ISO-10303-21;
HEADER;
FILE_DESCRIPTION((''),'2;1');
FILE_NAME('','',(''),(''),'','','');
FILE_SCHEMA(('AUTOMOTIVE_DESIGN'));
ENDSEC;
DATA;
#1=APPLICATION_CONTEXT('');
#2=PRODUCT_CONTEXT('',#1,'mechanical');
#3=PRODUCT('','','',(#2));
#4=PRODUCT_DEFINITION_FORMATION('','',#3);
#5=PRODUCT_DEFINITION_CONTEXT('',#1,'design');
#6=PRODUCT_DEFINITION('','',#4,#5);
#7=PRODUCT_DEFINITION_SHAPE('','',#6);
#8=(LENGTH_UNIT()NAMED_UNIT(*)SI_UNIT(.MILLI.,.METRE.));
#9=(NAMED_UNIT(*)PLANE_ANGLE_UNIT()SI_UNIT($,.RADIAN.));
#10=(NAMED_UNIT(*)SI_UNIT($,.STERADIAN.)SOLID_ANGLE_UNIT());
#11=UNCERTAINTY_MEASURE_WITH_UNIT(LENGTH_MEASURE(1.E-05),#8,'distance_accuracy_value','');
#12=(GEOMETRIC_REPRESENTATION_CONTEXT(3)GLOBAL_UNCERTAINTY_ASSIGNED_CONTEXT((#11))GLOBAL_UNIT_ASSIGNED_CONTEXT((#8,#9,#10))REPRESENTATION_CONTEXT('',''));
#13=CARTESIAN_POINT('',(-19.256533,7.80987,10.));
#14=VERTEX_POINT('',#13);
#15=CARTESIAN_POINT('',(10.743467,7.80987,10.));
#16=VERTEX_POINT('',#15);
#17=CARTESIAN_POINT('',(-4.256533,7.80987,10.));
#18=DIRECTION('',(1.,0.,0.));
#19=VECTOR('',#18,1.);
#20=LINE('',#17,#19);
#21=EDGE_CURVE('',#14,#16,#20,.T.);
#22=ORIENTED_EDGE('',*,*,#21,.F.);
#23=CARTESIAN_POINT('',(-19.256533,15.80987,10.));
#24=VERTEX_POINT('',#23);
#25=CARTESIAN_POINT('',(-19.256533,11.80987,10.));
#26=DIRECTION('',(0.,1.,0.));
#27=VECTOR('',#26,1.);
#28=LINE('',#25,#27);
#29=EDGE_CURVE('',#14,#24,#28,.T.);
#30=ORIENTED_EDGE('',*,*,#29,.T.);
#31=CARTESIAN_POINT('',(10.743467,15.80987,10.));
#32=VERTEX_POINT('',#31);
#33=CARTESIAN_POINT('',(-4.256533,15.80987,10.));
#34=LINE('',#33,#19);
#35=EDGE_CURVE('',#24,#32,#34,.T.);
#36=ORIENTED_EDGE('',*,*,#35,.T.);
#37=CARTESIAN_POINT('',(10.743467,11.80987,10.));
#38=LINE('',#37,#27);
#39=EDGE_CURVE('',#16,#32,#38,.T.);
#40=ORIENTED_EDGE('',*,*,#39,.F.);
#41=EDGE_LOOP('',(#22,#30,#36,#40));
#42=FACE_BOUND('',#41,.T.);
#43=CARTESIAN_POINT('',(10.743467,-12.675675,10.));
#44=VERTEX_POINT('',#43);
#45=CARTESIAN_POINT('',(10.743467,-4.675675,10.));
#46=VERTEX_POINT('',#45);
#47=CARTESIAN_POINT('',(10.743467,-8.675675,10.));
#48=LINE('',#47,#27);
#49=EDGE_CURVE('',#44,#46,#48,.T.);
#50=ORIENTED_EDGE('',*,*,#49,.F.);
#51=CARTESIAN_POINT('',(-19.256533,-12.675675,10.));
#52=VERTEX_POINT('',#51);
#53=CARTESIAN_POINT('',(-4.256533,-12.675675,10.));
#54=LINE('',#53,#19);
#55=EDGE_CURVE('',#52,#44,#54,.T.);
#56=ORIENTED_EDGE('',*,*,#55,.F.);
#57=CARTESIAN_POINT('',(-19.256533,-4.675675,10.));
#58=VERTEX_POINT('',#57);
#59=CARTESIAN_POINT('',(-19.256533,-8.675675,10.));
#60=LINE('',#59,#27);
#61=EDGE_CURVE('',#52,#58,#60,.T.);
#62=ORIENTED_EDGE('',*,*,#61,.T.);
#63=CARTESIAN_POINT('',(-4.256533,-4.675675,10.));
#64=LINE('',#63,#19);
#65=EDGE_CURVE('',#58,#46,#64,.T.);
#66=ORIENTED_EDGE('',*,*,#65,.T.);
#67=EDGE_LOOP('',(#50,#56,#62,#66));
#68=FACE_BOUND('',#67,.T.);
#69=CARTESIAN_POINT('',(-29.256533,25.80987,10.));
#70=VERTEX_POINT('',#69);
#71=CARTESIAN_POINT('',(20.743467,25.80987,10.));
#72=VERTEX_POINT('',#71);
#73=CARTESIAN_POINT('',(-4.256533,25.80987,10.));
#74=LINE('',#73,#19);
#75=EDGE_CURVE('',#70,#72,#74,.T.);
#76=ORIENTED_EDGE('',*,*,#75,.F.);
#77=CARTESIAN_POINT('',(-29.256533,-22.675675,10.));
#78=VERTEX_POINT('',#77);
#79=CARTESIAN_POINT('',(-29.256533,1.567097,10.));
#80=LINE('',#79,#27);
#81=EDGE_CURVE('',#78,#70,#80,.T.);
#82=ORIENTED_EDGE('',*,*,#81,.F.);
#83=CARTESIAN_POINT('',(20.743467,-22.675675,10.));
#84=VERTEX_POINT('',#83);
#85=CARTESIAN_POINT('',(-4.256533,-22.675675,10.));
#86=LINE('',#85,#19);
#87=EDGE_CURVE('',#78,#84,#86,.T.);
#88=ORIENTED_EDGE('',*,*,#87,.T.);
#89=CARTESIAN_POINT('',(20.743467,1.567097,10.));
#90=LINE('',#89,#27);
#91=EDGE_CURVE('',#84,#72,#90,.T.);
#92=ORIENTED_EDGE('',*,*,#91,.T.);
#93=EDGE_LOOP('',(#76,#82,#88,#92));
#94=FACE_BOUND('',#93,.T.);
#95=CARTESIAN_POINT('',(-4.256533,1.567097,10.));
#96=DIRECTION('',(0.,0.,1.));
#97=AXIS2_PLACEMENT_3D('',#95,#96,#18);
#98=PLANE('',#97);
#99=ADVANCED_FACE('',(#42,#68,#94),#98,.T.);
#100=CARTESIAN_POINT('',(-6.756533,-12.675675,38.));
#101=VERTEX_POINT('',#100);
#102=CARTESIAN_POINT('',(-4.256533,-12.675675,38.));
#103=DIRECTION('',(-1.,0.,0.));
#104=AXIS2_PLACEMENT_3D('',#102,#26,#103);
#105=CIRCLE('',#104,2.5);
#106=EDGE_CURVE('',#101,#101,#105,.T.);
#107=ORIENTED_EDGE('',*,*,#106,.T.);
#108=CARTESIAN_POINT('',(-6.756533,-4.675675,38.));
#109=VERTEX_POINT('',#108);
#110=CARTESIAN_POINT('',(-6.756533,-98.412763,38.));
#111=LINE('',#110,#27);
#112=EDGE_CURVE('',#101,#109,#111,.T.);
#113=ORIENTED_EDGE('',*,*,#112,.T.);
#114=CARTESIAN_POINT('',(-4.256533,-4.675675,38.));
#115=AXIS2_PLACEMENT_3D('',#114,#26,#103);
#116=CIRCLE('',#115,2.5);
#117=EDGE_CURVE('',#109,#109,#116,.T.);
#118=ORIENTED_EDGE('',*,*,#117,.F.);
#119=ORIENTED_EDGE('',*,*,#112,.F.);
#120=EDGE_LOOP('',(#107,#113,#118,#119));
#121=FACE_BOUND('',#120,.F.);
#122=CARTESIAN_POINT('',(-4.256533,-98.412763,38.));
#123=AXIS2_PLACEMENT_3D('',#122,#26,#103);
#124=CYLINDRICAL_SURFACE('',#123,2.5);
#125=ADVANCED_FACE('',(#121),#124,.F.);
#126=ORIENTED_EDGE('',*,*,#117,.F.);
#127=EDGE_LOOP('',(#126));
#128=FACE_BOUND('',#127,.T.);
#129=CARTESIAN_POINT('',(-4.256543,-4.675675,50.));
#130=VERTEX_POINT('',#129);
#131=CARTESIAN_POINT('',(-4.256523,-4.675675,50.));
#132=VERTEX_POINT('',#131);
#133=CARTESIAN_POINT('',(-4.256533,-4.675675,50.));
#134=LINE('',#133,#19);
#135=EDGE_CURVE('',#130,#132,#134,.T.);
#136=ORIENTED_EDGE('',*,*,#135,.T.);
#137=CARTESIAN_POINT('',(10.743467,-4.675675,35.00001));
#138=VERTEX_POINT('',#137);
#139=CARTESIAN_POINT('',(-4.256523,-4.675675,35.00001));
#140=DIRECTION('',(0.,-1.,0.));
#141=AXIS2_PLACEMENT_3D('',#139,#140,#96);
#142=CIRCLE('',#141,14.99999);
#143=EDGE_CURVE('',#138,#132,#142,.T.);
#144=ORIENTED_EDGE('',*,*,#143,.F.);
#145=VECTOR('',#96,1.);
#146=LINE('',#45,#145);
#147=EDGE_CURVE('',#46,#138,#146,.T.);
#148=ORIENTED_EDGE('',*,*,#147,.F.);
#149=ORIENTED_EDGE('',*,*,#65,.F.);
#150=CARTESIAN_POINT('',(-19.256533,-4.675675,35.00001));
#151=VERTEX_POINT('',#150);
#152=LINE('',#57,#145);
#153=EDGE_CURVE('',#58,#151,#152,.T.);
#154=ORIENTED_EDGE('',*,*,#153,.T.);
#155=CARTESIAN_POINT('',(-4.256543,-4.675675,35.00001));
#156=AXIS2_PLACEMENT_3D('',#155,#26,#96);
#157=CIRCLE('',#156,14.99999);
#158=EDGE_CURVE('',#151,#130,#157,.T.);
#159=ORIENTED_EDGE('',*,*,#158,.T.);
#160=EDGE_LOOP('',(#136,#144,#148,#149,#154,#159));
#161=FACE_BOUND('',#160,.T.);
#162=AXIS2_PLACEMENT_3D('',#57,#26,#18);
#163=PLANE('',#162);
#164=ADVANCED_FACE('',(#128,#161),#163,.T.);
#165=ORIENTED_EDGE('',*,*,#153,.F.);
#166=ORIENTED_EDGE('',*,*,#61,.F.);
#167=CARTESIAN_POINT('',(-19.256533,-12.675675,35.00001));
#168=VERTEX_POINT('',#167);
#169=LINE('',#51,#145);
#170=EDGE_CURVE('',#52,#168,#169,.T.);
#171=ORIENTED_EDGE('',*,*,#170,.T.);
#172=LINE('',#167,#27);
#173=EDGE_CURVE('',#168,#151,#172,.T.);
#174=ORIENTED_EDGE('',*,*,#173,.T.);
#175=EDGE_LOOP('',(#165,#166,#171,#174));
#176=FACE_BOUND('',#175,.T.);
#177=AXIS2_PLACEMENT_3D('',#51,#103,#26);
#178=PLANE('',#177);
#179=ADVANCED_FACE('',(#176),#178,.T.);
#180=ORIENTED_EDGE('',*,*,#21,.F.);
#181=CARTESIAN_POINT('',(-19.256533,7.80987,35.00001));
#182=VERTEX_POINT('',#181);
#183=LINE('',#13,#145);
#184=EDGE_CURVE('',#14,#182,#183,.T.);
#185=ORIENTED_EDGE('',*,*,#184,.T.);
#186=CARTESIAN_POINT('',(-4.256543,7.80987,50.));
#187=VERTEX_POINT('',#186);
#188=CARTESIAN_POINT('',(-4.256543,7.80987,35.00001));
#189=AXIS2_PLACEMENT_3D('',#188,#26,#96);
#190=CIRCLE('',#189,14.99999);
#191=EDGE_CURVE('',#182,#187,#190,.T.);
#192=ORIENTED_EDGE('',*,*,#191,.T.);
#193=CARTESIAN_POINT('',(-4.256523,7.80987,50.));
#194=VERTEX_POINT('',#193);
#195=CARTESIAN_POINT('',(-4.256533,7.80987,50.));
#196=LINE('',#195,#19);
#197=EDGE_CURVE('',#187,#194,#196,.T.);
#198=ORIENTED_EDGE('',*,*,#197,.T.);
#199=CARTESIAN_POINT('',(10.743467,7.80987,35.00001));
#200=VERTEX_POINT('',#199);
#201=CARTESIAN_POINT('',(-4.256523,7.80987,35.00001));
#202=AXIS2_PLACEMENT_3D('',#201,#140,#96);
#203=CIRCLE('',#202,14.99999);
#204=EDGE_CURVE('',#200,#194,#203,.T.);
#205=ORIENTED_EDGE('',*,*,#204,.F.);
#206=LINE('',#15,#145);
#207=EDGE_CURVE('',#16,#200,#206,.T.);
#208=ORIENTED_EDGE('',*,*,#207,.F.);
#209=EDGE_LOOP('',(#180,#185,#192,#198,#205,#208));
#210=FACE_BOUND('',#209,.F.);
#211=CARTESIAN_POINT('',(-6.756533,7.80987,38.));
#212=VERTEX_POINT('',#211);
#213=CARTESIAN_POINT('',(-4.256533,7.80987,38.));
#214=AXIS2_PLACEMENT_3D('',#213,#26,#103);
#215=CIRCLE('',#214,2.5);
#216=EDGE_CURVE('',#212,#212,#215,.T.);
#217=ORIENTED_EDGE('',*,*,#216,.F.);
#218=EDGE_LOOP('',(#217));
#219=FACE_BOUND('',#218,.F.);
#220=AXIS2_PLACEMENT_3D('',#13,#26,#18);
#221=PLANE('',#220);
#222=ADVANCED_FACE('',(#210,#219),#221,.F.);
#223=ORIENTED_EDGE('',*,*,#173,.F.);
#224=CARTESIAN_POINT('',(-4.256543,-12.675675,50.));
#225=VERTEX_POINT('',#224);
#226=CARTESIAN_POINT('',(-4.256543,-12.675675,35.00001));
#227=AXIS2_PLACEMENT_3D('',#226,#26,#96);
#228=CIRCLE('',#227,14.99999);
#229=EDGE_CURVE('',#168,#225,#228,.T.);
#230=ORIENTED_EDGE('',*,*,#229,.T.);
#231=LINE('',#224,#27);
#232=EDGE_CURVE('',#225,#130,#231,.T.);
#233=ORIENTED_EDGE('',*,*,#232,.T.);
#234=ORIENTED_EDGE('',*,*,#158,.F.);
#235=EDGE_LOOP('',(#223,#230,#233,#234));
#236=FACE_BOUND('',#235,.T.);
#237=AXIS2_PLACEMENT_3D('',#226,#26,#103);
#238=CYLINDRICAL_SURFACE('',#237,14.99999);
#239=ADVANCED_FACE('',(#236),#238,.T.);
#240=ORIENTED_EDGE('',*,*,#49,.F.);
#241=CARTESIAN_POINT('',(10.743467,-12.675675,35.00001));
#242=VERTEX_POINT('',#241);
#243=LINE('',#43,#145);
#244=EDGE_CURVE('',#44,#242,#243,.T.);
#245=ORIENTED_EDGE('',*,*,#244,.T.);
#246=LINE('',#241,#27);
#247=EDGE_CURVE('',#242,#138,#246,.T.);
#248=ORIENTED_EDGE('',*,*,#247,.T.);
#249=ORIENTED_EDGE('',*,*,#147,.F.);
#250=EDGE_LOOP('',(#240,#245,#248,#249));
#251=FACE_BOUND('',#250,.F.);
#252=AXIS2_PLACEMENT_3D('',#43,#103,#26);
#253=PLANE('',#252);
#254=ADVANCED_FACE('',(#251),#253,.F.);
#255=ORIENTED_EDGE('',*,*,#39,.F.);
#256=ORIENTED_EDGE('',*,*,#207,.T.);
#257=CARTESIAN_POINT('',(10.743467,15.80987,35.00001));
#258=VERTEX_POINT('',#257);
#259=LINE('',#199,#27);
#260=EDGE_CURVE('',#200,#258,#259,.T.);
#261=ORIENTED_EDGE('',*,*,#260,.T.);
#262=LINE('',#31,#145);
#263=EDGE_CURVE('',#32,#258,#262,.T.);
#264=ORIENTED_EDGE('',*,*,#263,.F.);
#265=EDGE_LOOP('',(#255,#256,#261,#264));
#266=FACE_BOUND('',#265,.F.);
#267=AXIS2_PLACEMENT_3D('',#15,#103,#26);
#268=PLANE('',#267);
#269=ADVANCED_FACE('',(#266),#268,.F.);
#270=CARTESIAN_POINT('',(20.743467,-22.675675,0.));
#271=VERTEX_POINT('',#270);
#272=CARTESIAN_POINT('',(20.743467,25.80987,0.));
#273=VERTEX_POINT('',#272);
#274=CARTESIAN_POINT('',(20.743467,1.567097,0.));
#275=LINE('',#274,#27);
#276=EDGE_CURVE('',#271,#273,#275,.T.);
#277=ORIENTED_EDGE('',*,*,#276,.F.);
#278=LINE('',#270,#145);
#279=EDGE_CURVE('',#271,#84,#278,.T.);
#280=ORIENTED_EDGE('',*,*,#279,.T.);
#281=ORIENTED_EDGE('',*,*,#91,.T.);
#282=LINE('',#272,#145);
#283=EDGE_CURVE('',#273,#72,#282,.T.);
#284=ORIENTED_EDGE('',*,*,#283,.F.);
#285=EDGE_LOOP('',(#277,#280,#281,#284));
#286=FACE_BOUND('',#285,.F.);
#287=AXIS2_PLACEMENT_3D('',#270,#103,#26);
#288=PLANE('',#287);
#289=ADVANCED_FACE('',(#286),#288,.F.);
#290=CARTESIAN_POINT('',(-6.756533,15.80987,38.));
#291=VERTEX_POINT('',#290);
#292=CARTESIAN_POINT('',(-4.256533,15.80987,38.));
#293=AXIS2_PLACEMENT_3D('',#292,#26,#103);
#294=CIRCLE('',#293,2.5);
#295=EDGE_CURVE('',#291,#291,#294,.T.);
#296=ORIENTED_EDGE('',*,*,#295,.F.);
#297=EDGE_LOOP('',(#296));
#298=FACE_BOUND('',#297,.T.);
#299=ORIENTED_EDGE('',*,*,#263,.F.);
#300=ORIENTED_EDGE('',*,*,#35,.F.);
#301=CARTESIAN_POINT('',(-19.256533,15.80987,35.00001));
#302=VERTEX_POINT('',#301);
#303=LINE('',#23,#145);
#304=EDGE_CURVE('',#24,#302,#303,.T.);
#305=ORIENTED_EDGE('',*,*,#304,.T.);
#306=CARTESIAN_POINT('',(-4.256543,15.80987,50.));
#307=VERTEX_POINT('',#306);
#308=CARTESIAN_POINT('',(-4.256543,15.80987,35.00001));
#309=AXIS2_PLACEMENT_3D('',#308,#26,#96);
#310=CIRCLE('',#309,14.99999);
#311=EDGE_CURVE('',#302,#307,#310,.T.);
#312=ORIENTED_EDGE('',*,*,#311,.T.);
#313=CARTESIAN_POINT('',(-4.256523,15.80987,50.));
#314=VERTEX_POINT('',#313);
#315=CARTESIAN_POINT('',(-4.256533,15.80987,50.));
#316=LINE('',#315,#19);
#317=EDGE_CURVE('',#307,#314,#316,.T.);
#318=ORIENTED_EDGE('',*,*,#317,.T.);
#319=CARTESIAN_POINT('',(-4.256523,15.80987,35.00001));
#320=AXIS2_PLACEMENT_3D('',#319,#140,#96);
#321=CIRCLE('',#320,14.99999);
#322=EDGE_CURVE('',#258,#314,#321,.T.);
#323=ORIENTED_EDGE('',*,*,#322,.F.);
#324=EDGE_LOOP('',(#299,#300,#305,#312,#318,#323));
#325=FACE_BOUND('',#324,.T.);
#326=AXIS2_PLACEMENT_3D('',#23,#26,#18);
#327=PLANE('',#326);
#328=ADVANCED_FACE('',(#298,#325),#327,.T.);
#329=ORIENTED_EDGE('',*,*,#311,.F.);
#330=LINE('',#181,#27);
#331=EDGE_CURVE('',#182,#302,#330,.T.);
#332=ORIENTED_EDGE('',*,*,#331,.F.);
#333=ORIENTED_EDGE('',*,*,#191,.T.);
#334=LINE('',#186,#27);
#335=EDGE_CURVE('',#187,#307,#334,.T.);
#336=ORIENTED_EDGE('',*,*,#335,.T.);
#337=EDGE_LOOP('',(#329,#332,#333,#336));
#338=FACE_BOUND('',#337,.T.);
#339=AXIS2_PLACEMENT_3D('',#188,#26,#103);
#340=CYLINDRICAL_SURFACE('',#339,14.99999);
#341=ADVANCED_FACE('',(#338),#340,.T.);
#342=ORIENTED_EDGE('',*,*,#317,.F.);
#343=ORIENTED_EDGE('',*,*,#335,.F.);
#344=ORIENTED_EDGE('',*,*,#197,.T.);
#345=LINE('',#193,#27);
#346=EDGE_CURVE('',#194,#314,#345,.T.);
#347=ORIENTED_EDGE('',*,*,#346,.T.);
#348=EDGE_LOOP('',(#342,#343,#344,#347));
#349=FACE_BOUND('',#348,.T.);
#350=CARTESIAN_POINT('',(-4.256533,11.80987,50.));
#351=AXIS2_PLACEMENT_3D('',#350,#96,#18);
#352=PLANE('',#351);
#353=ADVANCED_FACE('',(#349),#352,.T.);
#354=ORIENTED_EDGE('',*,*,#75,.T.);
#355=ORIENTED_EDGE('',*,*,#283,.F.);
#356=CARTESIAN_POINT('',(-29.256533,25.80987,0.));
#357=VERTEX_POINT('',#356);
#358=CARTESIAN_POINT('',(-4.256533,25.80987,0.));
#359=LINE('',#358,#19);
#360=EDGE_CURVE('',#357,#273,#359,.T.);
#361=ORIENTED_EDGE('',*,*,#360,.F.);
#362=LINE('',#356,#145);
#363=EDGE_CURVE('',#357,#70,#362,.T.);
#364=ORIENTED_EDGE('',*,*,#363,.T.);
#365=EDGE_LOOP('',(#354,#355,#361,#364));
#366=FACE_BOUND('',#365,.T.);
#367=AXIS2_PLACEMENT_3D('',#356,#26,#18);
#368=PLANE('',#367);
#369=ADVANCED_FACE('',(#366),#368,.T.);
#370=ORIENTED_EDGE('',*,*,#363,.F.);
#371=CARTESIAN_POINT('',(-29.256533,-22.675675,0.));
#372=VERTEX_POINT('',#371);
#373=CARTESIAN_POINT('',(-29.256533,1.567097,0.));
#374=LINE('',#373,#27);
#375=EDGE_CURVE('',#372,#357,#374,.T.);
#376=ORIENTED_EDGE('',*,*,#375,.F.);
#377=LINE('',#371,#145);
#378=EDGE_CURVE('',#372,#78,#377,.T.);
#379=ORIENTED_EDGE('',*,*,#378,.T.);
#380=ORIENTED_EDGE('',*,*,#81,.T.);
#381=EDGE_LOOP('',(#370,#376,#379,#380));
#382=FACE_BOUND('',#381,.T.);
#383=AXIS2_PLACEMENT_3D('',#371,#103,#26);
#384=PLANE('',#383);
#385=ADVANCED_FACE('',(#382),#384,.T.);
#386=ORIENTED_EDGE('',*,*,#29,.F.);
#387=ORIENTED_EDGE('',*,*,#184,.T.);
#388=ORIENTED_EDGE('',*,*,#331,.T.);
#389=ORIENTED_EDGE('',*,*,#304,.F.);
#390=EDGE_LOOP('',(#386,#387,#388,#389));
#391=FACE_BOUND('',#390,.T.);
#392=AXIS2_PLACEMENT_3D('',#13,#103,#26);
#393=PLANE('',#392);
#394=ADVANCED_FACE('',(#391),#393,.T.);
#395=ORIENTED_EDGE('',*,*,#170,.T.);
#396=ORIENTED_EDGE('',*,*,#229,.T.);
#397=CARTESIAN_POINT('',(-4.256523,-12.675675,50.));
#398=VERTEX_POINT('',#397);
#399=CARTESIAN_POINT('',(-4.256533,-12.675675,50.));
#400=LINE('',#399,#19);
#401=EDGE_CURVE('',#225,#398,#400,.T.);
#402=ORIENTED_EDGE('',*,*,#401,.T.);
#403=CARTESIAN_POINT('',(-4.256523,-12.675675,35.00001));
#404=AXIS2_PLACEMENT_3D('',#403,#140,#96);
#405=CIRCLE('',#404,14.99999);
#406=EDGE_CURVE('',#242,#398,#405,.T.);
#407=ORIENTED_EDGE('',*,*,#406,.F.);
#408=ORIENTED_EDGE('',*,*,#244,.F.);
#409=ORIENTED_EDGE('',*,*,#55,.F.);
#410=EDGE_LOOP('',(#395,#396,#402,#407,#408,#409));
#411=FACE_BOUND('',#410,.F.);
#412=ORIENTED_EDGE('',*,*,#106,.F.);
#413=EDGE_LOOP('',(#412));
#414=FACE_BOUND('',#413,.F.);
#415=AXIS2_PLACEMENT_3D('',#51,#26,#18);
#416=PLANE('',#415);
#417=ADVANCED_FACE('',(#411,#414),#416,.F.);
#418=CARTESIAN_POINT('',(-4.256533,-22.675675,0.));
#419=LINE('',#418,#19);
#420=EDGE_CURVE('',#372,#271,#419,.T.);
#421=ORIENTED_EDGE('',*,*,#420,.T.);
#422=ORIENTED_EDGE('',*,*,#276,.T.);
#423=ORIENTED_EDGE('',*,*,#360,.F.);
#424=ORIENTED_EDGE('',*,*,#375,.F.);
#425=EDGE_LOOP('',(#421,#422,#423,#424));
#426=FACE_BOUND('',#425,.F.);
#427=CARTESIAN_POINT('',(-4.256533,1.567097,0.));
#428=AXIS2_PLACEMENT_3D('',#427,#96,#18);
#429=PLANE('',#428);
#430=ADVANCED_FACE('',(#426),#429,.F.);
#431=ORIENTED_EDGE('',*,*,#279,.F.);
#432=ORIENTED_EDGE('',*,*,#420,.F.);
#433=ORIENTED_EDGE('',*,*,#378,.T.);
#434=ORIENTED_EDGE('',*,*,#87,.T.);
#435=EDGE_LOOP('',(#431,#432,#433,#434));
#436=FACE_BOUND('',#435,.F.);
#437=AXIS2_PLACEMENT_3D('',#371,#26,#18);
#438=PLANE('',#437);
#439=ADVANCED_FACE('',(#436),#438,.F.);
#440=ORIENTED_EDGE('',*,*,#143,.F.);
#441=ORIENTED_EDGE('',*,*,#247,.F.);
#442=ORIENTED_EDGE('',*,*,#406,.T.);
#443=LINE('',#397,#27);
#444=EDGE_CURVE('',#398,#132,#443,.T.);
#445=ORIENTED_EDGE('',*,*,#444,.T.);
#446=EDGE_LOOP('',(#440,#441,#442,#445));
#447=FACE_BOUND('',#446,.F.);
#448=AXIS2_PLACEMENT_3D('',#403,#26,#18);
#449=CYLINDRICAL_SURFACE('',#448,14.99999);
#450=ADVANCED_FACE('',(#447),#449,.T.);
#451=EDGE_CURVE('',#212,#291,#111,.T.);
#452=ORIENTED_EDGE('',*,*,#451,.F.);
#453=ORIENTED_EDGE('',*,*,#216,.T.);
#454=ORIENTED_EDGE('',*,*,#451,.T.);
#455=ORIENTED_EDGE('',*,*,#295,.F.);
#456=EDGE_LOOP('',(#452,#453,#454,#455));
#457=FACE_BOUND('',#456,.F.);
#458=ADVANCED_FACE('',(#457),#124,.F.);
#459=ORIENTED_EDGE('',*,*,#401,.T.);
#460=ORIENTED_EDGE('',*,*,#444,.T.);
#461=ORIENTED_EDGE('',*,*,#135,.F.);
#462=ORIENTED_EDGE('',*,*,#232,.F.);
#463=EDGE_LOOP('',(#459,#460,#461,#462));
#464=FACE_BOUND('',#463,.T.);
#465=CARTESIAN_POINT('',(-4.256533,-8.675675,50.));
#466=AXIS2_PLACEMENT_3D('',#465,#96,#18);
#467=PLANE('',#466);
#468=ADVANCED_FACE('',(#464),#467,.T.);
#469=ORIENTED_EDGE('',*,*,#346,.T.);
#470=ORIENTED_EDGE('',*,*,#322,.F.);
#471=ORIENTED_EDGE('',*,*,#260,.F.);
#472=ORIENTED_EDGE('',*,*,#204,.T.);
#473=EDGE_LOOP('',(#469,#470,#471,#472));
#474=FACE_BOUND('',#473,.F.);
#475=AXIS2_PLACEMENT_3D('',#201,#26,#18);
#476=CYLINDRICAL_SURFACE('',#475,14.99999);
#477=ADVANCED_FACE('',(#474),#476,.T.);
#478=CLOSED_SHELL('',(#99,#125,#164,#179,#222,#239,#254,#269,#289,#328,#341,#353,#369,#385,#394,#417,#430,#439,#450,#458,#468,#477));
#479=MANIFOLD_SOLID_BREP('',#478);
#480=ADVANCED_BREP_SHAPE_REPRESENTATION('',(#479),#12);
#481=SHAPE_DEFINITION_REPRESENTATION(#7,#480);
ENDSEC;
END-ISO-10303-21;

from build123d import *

# Parameters (mm, degrees)
F0_W     = 50
F0_H     = 48.4855457247
F1_DEPTH = 10
F2_W     = 30
F2_H     = 8
F4_DEPTH = 40
F3_W     = 30
F3_H     = 8
F5_DEPTH = 40
F7_D     = 5
F8_R     = 14.99999


# Not quite as in the source:
# - a fillet or chamfer is up to 0.001 mm smaller than in the source, because OpenCascade refuses the exact size


with BuildPart() as f1:
    # F0 (on Top) → F1 (new body)
    with BuildSketch(Plane.XY):
        with Locations((-4.2565334588, 1.5670973808)):
            Rectangle(F0_W, F0_H)
    extrude(amount=F1_DEPTH)

    # F2 (on face) → F4 (join)
    with BuildSketch(Plane.XY.offset(10)):
        with Locations((-4.2565334588, 11.8098702431)):
            Rectangle(F2_W, F2_H)
    extrude(amount=F4_DEPTH)

    # F3 (on face) → F5 (join)
    with BuildSketch(Plane.XY.offset(10)):
        with Locations((-4.2565334588, -8.6756754816)):
            Rectangle(F3_W, F3_H)
    extrude(amount=F5_DEPTH)

    # F7 (through all)
    with Locations(Plane.XZ.offset(12.6756754816)):
        with Locations((-4.2565334588, 38)):
            Hole(F7_D / 2)

    # F8 (radius 15 in the source; OpenCascade refuses exactly that, so slightly less here)
    f8_edges = [f1.edges().sort_by_distance(p)[0] for p in [
        (10.743467, -8.675675, 50),
        (-19.256533, -8.675675, 50),
        (10.743467, 11.80987, 50),
        (-19.256533, 11.80987, 50),
    ]]
    fillet(f8_edges, radius=F8_R)


solid = f1.part
